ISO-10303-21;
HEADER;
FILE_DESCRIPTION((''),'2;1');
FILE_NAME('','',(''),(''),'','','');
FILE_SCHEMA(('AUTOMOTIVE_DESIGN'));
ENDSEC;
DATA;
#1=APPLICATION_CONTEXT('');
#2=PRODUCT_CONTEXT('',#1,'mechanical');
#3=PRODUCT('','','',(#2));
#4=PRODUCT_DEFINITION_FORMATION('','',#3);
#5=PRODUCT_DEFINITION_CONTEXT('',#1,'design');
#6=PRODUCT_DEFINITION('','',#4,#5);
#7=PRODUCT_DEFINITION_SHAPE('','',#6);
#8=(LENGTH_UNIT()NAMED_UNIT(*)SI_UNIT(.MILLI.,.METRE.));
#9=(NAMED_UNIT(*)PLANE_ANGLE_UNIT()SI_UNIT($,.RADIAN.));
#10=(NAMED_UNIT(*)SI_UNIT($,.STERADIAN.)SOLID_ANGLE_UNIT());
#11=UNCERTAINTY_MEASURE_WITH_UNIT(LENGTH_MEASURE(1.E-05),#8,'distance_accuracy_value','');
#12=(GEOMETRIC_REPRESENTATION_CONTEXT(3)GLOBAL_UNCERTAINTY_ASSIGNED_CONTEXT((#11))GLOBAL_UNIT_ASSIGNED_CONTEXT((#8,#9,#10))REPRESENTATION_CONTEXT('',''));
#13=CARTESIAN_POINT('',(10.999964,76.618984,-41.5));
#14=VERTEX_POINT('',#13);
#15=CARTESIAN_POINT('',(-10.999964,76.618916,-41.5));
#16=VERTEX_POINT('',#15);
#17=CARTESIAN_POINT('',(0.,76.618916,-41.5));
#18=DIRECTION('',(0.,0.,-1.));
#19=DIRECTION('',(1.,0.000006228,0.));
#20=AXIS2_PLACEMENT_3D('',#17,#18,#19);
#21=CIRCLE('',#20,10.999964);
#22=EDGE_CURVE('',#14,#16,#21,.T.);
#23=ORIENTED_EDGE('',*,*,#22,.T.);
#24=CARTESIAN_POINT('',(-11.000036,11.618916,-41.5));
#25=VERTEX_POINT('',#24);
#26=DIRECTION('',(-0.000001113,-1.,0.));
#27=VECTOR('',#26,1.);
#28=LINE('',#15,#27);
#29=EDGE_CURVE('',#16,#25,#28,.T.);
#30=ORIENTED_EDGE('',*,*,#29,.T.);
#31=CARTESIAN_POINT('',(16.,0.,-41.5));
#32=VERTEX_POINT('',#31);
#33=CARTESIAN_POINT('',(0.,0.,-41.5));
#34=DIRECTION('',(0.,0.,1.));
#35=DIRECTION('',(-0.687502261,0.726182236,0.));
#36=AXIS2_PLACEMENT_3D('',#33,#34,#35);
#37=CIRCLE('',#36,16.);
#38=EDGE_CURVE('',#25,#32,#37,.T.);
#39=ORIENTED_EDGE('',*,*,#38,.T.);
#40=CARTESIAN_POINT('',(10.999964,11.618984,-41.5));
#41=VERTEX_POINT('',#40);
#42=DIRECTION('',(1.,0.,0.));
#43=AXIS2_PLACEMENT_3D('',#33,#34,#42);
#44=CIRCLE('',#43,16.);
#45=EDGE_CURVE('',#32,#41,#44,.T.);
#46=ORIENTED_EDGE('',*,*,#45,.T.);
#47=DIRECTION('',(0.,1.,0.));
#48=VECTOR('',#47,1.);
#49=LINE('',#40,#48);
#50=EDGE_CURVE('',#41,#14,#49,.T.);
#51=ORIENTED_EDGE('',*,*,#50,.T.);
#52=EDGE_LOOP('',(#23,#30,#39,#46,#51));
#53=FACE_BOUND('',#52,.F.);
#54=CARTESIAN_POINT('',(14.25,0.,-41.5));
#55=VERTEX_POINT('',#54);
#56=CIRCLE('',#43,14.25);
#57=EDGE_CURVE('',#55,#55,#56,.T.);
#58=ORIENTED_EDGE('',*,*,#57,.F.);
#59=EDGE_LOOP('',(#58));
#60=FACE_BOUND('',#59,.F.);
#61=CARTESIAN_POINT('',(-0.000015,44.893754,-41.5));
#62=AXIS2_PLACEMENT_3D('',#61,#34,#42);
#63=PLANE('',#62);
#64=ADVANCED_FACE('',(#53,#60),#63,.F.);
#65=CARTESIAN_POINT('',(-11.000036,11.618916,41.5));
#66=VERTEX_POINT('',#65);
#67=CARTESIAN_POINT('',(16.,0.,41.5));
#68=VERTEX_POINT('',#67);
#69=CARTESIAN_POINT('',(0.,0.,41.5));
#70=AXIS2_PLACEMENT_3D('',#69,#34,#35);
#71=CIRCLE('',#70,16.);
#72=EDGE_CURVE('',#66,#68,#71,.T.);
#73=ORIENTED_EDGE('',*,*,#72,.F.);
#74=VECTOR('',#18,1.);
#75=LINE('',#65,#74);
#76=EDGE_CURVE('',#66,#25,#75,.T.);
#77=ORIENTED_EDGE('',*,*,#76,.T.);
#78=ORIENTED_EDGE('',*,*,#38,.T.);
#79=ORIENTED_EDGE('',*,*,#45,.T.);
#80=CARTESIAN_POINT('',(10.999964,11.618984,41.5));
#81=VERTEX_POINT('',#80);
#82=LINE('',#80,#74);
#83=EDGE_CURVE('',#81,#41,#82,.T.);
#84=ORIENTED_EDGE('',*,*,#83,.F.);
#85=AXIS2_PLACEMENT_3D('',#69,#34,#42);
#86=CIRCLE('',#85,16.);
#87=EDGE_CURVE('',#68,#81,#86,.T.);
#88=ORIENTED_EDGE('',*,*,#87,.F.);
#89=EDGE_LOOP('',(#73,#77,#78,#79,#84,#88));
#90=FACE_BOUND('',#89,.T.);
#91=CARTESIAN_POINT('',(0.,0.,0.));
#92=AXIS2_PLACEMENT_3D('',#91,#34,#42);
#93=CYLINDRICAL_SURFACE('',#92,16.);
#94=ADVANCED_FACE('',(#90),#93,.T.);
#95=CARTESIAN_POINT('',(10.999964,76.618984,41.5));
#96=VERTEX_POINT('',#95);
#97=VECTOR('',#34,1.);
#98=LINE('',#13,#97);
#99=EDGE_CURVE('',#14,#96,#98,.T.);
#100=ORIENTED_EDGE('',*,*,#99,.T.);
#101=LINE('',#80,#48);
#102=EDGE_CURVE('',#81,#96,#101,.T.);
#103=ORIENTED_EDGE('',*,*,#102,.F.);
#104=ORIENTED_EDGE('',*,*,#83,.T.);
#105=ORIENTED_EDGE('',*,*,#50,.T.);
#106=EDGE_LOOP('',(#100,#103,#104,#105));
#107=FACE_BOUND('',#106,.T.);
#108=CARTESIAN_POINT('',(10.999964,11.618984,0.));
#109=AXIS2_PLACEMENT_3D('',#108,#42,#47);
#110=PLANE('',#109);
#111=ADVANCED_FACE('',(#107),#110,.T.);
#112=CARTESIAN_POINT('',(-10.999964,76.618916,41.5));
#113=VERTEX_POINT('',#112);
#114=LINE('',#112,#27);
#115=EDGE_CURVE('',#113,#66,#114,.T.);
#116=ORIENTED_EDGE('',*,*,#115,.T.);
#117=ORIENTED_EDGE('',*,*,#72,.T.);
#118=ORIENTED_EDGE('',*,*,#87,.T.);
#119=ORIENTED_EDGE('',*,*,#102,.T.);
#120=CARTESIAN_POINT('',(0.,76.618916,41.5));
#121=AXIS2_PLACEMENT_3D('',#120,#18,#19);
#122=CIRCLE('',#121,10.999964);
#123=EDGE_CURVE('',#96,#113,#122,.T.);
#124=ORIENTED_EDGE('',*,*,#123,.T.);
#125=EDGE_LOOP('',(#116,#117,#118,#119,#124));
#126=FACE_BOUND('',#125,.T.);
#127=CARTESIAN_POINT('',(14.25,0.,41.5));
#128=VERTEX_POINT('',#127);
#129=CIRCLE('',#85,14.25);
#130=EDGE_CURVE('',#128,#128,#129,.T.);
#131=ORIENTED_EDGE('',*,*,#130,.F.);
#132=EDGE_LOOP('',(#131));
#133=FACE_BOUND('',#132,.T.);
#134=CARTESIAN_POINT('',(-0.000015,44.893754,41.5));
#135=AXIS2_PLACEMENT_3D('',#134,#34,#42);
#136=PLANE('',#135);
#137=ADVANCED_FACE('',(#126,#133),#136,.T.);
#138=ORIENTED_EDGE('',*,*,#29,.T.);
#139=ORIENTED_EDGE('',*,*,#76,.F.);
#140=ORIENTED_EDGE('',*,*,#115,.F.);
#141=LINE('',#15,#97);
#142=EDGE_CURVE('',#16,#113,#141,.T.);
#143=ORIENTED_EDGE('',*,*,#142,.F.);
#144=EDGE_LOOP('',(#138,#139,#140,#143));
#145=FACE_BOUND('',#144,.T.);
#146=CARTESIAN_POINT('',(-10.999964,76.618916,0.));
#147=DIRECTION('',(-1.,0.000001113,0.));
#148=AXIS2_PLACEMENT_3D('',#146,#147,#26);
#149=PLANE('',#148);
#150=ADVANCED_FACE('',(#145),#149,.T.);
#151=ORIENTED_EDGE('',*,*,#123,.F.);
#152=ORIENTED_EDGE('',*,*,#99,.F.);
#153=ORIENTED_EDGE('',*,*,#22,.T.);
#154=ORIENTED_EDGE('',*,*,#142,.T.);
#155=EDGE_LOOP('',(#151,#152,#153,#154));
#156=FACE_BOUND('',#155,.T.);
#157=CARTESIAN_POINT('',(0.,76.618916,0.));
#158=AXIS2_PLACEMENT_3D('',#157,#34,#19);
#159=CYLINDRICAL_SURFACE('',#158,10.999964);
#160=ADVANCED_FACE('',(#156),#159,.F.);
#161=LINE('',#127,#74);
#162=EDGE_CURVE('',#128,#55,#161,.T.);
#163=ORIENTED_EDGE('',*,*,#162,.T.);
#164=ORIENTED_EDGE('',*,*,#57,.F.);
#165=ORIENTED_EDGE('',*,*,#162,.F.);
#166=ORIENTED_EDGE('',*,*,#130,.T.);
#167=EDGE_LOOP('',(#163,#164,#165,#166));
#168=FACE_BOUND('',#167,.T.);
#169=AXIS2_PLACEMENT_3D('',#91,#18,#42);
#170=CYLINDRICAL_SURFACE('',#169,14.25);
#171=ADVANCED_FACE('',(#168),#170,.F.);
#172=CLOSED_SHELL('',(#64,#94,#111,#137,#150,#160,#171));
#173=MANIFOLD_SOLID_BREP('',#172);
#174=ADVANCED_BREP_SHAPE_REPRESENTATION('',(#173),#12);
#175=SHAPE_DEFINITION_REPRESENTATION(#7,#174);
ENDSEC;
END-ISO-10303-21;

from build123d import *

# Parameters (mm, degrees)
F0_R     = 14.25
F1_DEPTH = 41.5


# Not quite as in the source:
# - ends of sketch curves that miss each other by under 0.0002 mm in the source are joined


with BuildPart() as f1:
    # F0 (on Top) → F1 (new body, symmetric)
    with BuildSketch(Plane.XY):
        with BuildLine():
            ThreePointArc((-11.0000361821, 11.6189157839), (-4.98249e-05, 15.9999999999), (10.9999638179, 11.6189842932))
            Line((10.9999638179, 11.6189842932), (10.9999638179, 76.6189842932))
            ThreePointArc((10.9999638179, 76.6189842932), (3.42546e-05, 65.6189519658), (-10.9999638181, 76.6189157839))
            Line((-10.9999638181, 76.6189157839), (-11.0000361821, 11.6189157839))
        make_face()
        with BuildLine():
            ThreePointArc((-11.0000361821, 11.6189157839), (-6.3245324367, -14.6969483042), (16, 0))
            ThreePointArc((16, 0), (14.6969286092, 6.3245782039), (10.9999638179, 11.6189842932))
            ThreePointArc((10.9999638179, 11.6189842932), (-4.98249e-05, 15.9999999999), (-11.0000361821, 11.6189157839))
        make_face()
        Circle(F0_R, mode=Mode.SUBTRACT)
    extrude(amount=F1_DEPTH, both=True)


solid = f1.part
